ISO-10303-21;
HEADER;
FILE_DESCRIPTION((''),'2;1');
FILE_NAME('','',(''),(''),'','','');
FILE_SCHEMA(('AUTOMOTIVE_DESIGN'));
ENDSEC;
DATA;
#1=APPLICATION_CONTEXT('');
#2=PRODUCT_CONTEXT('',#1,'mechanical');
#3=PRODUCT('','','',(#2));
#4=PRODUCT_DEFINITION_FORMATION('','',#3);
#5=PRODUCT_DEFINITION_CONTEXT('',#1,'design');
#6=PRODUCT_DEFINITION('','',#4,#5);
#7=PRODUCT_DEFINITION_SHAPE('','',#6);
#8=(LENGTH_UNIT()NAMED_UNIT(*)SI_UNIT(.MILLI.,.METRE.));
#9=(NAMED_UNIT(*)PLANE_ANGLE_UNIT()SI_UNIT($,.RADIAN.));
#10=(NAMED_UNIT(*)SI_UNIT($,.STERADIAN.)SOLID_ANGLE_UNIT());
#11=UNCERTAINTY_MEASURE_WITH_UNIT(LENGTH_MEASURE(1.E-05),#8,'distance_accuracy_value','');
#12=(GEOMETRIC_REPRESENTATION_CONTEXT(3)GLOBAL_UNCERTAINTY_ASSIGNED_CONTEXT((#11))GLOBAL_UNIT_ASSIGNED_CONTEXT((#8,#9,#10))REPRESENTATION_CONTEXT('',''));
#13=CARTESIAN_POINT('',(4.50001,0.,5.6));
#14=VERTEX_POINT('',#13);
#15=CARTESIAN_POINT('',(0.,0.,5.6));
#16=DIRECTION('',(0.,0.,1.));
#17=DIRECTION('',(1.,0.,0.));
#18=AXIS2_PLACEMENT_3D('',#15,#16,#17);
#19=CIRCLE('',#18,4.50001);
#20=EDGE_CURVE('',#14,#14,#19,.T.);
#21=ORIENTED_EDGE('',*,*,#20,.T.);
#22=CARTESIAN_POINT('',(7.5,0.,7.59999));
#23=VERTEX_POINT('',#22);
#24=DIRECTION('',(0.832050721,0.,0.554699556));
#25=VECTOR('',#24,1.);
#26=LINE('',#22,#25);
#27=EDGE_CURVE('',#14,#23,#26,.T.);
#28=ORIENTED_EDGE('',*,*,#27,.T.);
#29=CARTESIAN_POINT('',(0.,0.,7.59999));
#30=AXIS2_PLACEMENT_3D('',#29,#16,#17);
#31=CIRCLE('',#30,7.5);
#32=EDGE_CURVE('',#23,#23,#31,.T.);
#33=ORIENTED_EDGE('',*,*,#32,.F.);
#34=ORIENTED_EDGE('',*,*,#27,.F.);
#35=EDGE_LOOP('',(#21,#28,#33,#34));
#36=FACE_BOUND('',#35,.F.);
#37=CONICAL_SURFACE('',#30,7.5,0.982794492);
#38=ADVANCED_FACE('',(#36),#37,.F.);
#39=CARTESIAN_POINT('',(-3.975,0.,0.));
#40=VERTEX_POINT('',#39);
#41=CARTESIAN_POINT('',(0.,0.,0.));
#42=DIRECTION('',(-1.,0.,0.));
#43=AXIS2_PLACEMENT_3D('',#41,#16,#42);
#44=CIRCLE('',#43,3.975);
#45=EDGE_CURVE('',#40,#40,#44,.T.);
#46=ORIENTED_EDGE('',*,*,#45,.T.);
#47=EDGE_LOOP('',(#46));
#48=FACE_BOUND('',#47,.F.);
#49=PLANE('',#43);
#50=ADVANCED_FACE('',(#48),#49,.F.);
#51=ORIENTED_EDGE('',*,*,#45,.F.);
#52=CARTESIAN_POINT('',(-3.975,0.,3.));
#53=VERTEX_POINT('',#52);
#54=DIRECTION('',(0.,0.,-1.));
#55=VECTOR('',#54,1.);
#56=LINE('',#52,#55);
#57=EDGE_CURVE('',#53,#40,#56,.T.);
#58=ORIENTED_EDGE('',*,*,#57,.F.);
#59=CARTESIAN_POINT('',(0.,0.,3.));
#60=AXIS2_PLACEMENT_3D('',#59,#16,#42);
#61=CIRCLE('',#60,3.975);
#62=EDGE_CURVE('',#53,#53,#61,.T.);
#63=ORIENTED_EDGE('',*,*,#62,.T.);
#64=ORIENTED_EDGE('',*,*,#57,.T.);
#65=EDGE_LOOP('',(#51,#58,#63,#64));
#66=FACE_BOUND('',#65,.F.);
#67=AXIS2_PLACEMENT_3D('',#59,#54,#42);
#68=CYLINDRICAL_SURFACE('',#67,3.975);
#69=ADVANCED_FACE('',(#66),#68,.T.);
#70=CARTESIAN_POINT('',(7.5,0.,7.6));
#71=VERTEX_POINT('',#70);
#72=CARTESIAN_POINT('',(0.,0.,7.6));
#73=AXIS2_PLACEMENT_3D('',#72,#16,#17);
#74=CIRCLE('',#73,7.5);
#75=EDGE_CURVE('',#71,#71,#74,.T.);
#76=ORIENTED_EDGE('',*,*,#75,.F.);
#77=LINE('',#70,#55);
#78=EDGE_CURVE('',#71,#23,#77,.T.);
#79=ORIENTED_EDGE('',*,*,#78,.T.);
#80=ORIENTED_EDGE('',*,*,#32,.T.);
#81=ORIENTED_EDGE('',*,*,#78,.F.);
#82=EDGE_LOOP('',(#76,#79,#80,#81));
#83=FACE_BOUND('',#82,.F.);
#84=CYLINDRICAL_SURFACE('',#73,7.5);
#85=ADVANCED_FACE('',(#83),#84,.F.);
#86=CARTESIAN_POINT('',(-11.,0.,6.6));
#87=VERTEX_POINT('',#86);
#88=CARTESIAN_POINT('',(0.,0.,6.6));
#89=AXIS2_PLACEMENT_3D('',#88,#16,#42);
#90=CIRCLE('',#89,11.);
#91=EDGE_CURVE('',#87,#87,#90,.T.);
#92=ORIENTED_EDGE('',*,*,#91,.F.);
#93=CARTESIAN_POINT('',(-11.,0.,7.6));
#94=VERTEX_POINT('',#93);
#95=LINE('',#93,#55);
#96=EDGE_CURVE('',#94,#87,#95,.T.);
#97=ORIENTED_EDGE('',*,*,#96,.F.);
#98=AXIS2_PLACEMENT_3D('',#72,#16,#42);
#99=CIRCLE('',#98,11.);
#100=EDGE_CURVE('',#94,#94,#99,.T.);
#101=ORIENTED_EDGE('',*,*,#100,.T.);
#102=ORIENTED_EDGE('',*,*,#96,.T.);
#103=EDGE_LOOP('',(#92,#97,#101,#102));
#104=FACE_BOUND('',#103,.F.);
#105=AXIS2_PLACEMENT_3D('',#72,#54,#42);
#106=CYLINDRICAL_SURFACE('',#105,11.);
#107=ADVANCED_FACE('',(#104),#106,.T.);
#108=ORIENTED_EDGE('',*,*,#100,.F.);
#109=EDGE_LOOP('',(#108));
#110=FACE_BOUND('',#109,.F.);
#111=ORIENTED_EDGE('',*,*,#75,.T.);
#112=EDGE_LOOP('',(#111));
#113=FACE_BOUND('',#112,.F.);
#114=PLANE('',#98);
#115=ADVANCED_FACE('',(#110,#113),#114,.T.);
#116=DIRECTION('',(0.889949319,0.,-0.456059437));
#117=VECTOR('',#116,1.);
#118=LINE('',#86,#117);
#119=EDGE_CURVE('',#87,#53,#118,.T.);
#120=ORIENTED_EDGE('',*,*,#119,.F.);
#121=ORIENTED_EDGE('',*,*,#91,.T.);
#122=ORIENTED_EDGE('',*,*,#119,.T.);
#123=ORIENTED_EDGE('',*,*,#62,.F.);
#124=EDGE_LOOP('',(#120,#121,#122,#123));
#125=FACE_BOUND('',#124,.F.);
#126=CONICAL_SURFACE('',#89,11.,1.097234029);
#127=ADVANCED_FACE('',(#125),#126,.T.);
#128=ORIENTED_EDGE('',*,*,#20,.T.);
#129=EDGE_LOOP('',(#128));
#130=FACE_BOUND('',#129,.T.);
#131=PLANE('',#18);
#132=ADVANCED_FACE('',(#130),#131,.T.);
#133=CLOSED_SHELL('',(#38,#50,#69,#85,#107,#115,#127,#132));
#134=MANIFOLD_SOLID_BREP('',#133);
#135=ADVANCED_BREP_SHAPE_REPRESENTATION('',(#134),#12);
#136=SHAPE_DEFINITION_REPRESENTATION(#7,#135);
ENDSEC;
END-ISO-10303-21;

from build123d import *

# Parameters (mm, degrees)
F2_R     = 7.5
F3_DEPTH = 2
F4_SIZE2 = 1.99999
F4_SIZE  = 2.99999


# Not quite as in the source:
# - a fillet or chamfer is up to 0.001 mm smaller than in the source, because OpenCascade refuses the exact size


with BuildPart() as f1:
    # F0 (on Front) → F1 (revolve)
    with BuildSketch(Plane.XZ):
        Polygon((-3.975, 0), (0, 0), (0, 7.6), (-11, 7.6), (-11, 6.6), (-3.975, 3), align=None)
    revolve(axis=Axis((0, 0, 3.8), (0, 0, 1)))

    # F2 (on face) → F3 (cut)
    with BuildSketch(Plane.XY.offset(7.6)):
        Circle(F2_R)
    extrude(amount=-F3_DEPTH, mode=Mode.SUBTRACT)

    # F4 (size 3 and 2 in the source; OpenCascade refuses exactly that, so slightly less here)
    f4_edges = [f1.edges().sort_by_distance(p)[0] for p in [
        (-7.5, 0, 5.6),
    ]]
    f4_side = f1.faces().sort_by_distance((0, 0, 5.6))[0]
    chamfer(f4_edges, length=F4_SIZE, length2=F4_SIZE2, reference=f4_side)


solid = f1.part
